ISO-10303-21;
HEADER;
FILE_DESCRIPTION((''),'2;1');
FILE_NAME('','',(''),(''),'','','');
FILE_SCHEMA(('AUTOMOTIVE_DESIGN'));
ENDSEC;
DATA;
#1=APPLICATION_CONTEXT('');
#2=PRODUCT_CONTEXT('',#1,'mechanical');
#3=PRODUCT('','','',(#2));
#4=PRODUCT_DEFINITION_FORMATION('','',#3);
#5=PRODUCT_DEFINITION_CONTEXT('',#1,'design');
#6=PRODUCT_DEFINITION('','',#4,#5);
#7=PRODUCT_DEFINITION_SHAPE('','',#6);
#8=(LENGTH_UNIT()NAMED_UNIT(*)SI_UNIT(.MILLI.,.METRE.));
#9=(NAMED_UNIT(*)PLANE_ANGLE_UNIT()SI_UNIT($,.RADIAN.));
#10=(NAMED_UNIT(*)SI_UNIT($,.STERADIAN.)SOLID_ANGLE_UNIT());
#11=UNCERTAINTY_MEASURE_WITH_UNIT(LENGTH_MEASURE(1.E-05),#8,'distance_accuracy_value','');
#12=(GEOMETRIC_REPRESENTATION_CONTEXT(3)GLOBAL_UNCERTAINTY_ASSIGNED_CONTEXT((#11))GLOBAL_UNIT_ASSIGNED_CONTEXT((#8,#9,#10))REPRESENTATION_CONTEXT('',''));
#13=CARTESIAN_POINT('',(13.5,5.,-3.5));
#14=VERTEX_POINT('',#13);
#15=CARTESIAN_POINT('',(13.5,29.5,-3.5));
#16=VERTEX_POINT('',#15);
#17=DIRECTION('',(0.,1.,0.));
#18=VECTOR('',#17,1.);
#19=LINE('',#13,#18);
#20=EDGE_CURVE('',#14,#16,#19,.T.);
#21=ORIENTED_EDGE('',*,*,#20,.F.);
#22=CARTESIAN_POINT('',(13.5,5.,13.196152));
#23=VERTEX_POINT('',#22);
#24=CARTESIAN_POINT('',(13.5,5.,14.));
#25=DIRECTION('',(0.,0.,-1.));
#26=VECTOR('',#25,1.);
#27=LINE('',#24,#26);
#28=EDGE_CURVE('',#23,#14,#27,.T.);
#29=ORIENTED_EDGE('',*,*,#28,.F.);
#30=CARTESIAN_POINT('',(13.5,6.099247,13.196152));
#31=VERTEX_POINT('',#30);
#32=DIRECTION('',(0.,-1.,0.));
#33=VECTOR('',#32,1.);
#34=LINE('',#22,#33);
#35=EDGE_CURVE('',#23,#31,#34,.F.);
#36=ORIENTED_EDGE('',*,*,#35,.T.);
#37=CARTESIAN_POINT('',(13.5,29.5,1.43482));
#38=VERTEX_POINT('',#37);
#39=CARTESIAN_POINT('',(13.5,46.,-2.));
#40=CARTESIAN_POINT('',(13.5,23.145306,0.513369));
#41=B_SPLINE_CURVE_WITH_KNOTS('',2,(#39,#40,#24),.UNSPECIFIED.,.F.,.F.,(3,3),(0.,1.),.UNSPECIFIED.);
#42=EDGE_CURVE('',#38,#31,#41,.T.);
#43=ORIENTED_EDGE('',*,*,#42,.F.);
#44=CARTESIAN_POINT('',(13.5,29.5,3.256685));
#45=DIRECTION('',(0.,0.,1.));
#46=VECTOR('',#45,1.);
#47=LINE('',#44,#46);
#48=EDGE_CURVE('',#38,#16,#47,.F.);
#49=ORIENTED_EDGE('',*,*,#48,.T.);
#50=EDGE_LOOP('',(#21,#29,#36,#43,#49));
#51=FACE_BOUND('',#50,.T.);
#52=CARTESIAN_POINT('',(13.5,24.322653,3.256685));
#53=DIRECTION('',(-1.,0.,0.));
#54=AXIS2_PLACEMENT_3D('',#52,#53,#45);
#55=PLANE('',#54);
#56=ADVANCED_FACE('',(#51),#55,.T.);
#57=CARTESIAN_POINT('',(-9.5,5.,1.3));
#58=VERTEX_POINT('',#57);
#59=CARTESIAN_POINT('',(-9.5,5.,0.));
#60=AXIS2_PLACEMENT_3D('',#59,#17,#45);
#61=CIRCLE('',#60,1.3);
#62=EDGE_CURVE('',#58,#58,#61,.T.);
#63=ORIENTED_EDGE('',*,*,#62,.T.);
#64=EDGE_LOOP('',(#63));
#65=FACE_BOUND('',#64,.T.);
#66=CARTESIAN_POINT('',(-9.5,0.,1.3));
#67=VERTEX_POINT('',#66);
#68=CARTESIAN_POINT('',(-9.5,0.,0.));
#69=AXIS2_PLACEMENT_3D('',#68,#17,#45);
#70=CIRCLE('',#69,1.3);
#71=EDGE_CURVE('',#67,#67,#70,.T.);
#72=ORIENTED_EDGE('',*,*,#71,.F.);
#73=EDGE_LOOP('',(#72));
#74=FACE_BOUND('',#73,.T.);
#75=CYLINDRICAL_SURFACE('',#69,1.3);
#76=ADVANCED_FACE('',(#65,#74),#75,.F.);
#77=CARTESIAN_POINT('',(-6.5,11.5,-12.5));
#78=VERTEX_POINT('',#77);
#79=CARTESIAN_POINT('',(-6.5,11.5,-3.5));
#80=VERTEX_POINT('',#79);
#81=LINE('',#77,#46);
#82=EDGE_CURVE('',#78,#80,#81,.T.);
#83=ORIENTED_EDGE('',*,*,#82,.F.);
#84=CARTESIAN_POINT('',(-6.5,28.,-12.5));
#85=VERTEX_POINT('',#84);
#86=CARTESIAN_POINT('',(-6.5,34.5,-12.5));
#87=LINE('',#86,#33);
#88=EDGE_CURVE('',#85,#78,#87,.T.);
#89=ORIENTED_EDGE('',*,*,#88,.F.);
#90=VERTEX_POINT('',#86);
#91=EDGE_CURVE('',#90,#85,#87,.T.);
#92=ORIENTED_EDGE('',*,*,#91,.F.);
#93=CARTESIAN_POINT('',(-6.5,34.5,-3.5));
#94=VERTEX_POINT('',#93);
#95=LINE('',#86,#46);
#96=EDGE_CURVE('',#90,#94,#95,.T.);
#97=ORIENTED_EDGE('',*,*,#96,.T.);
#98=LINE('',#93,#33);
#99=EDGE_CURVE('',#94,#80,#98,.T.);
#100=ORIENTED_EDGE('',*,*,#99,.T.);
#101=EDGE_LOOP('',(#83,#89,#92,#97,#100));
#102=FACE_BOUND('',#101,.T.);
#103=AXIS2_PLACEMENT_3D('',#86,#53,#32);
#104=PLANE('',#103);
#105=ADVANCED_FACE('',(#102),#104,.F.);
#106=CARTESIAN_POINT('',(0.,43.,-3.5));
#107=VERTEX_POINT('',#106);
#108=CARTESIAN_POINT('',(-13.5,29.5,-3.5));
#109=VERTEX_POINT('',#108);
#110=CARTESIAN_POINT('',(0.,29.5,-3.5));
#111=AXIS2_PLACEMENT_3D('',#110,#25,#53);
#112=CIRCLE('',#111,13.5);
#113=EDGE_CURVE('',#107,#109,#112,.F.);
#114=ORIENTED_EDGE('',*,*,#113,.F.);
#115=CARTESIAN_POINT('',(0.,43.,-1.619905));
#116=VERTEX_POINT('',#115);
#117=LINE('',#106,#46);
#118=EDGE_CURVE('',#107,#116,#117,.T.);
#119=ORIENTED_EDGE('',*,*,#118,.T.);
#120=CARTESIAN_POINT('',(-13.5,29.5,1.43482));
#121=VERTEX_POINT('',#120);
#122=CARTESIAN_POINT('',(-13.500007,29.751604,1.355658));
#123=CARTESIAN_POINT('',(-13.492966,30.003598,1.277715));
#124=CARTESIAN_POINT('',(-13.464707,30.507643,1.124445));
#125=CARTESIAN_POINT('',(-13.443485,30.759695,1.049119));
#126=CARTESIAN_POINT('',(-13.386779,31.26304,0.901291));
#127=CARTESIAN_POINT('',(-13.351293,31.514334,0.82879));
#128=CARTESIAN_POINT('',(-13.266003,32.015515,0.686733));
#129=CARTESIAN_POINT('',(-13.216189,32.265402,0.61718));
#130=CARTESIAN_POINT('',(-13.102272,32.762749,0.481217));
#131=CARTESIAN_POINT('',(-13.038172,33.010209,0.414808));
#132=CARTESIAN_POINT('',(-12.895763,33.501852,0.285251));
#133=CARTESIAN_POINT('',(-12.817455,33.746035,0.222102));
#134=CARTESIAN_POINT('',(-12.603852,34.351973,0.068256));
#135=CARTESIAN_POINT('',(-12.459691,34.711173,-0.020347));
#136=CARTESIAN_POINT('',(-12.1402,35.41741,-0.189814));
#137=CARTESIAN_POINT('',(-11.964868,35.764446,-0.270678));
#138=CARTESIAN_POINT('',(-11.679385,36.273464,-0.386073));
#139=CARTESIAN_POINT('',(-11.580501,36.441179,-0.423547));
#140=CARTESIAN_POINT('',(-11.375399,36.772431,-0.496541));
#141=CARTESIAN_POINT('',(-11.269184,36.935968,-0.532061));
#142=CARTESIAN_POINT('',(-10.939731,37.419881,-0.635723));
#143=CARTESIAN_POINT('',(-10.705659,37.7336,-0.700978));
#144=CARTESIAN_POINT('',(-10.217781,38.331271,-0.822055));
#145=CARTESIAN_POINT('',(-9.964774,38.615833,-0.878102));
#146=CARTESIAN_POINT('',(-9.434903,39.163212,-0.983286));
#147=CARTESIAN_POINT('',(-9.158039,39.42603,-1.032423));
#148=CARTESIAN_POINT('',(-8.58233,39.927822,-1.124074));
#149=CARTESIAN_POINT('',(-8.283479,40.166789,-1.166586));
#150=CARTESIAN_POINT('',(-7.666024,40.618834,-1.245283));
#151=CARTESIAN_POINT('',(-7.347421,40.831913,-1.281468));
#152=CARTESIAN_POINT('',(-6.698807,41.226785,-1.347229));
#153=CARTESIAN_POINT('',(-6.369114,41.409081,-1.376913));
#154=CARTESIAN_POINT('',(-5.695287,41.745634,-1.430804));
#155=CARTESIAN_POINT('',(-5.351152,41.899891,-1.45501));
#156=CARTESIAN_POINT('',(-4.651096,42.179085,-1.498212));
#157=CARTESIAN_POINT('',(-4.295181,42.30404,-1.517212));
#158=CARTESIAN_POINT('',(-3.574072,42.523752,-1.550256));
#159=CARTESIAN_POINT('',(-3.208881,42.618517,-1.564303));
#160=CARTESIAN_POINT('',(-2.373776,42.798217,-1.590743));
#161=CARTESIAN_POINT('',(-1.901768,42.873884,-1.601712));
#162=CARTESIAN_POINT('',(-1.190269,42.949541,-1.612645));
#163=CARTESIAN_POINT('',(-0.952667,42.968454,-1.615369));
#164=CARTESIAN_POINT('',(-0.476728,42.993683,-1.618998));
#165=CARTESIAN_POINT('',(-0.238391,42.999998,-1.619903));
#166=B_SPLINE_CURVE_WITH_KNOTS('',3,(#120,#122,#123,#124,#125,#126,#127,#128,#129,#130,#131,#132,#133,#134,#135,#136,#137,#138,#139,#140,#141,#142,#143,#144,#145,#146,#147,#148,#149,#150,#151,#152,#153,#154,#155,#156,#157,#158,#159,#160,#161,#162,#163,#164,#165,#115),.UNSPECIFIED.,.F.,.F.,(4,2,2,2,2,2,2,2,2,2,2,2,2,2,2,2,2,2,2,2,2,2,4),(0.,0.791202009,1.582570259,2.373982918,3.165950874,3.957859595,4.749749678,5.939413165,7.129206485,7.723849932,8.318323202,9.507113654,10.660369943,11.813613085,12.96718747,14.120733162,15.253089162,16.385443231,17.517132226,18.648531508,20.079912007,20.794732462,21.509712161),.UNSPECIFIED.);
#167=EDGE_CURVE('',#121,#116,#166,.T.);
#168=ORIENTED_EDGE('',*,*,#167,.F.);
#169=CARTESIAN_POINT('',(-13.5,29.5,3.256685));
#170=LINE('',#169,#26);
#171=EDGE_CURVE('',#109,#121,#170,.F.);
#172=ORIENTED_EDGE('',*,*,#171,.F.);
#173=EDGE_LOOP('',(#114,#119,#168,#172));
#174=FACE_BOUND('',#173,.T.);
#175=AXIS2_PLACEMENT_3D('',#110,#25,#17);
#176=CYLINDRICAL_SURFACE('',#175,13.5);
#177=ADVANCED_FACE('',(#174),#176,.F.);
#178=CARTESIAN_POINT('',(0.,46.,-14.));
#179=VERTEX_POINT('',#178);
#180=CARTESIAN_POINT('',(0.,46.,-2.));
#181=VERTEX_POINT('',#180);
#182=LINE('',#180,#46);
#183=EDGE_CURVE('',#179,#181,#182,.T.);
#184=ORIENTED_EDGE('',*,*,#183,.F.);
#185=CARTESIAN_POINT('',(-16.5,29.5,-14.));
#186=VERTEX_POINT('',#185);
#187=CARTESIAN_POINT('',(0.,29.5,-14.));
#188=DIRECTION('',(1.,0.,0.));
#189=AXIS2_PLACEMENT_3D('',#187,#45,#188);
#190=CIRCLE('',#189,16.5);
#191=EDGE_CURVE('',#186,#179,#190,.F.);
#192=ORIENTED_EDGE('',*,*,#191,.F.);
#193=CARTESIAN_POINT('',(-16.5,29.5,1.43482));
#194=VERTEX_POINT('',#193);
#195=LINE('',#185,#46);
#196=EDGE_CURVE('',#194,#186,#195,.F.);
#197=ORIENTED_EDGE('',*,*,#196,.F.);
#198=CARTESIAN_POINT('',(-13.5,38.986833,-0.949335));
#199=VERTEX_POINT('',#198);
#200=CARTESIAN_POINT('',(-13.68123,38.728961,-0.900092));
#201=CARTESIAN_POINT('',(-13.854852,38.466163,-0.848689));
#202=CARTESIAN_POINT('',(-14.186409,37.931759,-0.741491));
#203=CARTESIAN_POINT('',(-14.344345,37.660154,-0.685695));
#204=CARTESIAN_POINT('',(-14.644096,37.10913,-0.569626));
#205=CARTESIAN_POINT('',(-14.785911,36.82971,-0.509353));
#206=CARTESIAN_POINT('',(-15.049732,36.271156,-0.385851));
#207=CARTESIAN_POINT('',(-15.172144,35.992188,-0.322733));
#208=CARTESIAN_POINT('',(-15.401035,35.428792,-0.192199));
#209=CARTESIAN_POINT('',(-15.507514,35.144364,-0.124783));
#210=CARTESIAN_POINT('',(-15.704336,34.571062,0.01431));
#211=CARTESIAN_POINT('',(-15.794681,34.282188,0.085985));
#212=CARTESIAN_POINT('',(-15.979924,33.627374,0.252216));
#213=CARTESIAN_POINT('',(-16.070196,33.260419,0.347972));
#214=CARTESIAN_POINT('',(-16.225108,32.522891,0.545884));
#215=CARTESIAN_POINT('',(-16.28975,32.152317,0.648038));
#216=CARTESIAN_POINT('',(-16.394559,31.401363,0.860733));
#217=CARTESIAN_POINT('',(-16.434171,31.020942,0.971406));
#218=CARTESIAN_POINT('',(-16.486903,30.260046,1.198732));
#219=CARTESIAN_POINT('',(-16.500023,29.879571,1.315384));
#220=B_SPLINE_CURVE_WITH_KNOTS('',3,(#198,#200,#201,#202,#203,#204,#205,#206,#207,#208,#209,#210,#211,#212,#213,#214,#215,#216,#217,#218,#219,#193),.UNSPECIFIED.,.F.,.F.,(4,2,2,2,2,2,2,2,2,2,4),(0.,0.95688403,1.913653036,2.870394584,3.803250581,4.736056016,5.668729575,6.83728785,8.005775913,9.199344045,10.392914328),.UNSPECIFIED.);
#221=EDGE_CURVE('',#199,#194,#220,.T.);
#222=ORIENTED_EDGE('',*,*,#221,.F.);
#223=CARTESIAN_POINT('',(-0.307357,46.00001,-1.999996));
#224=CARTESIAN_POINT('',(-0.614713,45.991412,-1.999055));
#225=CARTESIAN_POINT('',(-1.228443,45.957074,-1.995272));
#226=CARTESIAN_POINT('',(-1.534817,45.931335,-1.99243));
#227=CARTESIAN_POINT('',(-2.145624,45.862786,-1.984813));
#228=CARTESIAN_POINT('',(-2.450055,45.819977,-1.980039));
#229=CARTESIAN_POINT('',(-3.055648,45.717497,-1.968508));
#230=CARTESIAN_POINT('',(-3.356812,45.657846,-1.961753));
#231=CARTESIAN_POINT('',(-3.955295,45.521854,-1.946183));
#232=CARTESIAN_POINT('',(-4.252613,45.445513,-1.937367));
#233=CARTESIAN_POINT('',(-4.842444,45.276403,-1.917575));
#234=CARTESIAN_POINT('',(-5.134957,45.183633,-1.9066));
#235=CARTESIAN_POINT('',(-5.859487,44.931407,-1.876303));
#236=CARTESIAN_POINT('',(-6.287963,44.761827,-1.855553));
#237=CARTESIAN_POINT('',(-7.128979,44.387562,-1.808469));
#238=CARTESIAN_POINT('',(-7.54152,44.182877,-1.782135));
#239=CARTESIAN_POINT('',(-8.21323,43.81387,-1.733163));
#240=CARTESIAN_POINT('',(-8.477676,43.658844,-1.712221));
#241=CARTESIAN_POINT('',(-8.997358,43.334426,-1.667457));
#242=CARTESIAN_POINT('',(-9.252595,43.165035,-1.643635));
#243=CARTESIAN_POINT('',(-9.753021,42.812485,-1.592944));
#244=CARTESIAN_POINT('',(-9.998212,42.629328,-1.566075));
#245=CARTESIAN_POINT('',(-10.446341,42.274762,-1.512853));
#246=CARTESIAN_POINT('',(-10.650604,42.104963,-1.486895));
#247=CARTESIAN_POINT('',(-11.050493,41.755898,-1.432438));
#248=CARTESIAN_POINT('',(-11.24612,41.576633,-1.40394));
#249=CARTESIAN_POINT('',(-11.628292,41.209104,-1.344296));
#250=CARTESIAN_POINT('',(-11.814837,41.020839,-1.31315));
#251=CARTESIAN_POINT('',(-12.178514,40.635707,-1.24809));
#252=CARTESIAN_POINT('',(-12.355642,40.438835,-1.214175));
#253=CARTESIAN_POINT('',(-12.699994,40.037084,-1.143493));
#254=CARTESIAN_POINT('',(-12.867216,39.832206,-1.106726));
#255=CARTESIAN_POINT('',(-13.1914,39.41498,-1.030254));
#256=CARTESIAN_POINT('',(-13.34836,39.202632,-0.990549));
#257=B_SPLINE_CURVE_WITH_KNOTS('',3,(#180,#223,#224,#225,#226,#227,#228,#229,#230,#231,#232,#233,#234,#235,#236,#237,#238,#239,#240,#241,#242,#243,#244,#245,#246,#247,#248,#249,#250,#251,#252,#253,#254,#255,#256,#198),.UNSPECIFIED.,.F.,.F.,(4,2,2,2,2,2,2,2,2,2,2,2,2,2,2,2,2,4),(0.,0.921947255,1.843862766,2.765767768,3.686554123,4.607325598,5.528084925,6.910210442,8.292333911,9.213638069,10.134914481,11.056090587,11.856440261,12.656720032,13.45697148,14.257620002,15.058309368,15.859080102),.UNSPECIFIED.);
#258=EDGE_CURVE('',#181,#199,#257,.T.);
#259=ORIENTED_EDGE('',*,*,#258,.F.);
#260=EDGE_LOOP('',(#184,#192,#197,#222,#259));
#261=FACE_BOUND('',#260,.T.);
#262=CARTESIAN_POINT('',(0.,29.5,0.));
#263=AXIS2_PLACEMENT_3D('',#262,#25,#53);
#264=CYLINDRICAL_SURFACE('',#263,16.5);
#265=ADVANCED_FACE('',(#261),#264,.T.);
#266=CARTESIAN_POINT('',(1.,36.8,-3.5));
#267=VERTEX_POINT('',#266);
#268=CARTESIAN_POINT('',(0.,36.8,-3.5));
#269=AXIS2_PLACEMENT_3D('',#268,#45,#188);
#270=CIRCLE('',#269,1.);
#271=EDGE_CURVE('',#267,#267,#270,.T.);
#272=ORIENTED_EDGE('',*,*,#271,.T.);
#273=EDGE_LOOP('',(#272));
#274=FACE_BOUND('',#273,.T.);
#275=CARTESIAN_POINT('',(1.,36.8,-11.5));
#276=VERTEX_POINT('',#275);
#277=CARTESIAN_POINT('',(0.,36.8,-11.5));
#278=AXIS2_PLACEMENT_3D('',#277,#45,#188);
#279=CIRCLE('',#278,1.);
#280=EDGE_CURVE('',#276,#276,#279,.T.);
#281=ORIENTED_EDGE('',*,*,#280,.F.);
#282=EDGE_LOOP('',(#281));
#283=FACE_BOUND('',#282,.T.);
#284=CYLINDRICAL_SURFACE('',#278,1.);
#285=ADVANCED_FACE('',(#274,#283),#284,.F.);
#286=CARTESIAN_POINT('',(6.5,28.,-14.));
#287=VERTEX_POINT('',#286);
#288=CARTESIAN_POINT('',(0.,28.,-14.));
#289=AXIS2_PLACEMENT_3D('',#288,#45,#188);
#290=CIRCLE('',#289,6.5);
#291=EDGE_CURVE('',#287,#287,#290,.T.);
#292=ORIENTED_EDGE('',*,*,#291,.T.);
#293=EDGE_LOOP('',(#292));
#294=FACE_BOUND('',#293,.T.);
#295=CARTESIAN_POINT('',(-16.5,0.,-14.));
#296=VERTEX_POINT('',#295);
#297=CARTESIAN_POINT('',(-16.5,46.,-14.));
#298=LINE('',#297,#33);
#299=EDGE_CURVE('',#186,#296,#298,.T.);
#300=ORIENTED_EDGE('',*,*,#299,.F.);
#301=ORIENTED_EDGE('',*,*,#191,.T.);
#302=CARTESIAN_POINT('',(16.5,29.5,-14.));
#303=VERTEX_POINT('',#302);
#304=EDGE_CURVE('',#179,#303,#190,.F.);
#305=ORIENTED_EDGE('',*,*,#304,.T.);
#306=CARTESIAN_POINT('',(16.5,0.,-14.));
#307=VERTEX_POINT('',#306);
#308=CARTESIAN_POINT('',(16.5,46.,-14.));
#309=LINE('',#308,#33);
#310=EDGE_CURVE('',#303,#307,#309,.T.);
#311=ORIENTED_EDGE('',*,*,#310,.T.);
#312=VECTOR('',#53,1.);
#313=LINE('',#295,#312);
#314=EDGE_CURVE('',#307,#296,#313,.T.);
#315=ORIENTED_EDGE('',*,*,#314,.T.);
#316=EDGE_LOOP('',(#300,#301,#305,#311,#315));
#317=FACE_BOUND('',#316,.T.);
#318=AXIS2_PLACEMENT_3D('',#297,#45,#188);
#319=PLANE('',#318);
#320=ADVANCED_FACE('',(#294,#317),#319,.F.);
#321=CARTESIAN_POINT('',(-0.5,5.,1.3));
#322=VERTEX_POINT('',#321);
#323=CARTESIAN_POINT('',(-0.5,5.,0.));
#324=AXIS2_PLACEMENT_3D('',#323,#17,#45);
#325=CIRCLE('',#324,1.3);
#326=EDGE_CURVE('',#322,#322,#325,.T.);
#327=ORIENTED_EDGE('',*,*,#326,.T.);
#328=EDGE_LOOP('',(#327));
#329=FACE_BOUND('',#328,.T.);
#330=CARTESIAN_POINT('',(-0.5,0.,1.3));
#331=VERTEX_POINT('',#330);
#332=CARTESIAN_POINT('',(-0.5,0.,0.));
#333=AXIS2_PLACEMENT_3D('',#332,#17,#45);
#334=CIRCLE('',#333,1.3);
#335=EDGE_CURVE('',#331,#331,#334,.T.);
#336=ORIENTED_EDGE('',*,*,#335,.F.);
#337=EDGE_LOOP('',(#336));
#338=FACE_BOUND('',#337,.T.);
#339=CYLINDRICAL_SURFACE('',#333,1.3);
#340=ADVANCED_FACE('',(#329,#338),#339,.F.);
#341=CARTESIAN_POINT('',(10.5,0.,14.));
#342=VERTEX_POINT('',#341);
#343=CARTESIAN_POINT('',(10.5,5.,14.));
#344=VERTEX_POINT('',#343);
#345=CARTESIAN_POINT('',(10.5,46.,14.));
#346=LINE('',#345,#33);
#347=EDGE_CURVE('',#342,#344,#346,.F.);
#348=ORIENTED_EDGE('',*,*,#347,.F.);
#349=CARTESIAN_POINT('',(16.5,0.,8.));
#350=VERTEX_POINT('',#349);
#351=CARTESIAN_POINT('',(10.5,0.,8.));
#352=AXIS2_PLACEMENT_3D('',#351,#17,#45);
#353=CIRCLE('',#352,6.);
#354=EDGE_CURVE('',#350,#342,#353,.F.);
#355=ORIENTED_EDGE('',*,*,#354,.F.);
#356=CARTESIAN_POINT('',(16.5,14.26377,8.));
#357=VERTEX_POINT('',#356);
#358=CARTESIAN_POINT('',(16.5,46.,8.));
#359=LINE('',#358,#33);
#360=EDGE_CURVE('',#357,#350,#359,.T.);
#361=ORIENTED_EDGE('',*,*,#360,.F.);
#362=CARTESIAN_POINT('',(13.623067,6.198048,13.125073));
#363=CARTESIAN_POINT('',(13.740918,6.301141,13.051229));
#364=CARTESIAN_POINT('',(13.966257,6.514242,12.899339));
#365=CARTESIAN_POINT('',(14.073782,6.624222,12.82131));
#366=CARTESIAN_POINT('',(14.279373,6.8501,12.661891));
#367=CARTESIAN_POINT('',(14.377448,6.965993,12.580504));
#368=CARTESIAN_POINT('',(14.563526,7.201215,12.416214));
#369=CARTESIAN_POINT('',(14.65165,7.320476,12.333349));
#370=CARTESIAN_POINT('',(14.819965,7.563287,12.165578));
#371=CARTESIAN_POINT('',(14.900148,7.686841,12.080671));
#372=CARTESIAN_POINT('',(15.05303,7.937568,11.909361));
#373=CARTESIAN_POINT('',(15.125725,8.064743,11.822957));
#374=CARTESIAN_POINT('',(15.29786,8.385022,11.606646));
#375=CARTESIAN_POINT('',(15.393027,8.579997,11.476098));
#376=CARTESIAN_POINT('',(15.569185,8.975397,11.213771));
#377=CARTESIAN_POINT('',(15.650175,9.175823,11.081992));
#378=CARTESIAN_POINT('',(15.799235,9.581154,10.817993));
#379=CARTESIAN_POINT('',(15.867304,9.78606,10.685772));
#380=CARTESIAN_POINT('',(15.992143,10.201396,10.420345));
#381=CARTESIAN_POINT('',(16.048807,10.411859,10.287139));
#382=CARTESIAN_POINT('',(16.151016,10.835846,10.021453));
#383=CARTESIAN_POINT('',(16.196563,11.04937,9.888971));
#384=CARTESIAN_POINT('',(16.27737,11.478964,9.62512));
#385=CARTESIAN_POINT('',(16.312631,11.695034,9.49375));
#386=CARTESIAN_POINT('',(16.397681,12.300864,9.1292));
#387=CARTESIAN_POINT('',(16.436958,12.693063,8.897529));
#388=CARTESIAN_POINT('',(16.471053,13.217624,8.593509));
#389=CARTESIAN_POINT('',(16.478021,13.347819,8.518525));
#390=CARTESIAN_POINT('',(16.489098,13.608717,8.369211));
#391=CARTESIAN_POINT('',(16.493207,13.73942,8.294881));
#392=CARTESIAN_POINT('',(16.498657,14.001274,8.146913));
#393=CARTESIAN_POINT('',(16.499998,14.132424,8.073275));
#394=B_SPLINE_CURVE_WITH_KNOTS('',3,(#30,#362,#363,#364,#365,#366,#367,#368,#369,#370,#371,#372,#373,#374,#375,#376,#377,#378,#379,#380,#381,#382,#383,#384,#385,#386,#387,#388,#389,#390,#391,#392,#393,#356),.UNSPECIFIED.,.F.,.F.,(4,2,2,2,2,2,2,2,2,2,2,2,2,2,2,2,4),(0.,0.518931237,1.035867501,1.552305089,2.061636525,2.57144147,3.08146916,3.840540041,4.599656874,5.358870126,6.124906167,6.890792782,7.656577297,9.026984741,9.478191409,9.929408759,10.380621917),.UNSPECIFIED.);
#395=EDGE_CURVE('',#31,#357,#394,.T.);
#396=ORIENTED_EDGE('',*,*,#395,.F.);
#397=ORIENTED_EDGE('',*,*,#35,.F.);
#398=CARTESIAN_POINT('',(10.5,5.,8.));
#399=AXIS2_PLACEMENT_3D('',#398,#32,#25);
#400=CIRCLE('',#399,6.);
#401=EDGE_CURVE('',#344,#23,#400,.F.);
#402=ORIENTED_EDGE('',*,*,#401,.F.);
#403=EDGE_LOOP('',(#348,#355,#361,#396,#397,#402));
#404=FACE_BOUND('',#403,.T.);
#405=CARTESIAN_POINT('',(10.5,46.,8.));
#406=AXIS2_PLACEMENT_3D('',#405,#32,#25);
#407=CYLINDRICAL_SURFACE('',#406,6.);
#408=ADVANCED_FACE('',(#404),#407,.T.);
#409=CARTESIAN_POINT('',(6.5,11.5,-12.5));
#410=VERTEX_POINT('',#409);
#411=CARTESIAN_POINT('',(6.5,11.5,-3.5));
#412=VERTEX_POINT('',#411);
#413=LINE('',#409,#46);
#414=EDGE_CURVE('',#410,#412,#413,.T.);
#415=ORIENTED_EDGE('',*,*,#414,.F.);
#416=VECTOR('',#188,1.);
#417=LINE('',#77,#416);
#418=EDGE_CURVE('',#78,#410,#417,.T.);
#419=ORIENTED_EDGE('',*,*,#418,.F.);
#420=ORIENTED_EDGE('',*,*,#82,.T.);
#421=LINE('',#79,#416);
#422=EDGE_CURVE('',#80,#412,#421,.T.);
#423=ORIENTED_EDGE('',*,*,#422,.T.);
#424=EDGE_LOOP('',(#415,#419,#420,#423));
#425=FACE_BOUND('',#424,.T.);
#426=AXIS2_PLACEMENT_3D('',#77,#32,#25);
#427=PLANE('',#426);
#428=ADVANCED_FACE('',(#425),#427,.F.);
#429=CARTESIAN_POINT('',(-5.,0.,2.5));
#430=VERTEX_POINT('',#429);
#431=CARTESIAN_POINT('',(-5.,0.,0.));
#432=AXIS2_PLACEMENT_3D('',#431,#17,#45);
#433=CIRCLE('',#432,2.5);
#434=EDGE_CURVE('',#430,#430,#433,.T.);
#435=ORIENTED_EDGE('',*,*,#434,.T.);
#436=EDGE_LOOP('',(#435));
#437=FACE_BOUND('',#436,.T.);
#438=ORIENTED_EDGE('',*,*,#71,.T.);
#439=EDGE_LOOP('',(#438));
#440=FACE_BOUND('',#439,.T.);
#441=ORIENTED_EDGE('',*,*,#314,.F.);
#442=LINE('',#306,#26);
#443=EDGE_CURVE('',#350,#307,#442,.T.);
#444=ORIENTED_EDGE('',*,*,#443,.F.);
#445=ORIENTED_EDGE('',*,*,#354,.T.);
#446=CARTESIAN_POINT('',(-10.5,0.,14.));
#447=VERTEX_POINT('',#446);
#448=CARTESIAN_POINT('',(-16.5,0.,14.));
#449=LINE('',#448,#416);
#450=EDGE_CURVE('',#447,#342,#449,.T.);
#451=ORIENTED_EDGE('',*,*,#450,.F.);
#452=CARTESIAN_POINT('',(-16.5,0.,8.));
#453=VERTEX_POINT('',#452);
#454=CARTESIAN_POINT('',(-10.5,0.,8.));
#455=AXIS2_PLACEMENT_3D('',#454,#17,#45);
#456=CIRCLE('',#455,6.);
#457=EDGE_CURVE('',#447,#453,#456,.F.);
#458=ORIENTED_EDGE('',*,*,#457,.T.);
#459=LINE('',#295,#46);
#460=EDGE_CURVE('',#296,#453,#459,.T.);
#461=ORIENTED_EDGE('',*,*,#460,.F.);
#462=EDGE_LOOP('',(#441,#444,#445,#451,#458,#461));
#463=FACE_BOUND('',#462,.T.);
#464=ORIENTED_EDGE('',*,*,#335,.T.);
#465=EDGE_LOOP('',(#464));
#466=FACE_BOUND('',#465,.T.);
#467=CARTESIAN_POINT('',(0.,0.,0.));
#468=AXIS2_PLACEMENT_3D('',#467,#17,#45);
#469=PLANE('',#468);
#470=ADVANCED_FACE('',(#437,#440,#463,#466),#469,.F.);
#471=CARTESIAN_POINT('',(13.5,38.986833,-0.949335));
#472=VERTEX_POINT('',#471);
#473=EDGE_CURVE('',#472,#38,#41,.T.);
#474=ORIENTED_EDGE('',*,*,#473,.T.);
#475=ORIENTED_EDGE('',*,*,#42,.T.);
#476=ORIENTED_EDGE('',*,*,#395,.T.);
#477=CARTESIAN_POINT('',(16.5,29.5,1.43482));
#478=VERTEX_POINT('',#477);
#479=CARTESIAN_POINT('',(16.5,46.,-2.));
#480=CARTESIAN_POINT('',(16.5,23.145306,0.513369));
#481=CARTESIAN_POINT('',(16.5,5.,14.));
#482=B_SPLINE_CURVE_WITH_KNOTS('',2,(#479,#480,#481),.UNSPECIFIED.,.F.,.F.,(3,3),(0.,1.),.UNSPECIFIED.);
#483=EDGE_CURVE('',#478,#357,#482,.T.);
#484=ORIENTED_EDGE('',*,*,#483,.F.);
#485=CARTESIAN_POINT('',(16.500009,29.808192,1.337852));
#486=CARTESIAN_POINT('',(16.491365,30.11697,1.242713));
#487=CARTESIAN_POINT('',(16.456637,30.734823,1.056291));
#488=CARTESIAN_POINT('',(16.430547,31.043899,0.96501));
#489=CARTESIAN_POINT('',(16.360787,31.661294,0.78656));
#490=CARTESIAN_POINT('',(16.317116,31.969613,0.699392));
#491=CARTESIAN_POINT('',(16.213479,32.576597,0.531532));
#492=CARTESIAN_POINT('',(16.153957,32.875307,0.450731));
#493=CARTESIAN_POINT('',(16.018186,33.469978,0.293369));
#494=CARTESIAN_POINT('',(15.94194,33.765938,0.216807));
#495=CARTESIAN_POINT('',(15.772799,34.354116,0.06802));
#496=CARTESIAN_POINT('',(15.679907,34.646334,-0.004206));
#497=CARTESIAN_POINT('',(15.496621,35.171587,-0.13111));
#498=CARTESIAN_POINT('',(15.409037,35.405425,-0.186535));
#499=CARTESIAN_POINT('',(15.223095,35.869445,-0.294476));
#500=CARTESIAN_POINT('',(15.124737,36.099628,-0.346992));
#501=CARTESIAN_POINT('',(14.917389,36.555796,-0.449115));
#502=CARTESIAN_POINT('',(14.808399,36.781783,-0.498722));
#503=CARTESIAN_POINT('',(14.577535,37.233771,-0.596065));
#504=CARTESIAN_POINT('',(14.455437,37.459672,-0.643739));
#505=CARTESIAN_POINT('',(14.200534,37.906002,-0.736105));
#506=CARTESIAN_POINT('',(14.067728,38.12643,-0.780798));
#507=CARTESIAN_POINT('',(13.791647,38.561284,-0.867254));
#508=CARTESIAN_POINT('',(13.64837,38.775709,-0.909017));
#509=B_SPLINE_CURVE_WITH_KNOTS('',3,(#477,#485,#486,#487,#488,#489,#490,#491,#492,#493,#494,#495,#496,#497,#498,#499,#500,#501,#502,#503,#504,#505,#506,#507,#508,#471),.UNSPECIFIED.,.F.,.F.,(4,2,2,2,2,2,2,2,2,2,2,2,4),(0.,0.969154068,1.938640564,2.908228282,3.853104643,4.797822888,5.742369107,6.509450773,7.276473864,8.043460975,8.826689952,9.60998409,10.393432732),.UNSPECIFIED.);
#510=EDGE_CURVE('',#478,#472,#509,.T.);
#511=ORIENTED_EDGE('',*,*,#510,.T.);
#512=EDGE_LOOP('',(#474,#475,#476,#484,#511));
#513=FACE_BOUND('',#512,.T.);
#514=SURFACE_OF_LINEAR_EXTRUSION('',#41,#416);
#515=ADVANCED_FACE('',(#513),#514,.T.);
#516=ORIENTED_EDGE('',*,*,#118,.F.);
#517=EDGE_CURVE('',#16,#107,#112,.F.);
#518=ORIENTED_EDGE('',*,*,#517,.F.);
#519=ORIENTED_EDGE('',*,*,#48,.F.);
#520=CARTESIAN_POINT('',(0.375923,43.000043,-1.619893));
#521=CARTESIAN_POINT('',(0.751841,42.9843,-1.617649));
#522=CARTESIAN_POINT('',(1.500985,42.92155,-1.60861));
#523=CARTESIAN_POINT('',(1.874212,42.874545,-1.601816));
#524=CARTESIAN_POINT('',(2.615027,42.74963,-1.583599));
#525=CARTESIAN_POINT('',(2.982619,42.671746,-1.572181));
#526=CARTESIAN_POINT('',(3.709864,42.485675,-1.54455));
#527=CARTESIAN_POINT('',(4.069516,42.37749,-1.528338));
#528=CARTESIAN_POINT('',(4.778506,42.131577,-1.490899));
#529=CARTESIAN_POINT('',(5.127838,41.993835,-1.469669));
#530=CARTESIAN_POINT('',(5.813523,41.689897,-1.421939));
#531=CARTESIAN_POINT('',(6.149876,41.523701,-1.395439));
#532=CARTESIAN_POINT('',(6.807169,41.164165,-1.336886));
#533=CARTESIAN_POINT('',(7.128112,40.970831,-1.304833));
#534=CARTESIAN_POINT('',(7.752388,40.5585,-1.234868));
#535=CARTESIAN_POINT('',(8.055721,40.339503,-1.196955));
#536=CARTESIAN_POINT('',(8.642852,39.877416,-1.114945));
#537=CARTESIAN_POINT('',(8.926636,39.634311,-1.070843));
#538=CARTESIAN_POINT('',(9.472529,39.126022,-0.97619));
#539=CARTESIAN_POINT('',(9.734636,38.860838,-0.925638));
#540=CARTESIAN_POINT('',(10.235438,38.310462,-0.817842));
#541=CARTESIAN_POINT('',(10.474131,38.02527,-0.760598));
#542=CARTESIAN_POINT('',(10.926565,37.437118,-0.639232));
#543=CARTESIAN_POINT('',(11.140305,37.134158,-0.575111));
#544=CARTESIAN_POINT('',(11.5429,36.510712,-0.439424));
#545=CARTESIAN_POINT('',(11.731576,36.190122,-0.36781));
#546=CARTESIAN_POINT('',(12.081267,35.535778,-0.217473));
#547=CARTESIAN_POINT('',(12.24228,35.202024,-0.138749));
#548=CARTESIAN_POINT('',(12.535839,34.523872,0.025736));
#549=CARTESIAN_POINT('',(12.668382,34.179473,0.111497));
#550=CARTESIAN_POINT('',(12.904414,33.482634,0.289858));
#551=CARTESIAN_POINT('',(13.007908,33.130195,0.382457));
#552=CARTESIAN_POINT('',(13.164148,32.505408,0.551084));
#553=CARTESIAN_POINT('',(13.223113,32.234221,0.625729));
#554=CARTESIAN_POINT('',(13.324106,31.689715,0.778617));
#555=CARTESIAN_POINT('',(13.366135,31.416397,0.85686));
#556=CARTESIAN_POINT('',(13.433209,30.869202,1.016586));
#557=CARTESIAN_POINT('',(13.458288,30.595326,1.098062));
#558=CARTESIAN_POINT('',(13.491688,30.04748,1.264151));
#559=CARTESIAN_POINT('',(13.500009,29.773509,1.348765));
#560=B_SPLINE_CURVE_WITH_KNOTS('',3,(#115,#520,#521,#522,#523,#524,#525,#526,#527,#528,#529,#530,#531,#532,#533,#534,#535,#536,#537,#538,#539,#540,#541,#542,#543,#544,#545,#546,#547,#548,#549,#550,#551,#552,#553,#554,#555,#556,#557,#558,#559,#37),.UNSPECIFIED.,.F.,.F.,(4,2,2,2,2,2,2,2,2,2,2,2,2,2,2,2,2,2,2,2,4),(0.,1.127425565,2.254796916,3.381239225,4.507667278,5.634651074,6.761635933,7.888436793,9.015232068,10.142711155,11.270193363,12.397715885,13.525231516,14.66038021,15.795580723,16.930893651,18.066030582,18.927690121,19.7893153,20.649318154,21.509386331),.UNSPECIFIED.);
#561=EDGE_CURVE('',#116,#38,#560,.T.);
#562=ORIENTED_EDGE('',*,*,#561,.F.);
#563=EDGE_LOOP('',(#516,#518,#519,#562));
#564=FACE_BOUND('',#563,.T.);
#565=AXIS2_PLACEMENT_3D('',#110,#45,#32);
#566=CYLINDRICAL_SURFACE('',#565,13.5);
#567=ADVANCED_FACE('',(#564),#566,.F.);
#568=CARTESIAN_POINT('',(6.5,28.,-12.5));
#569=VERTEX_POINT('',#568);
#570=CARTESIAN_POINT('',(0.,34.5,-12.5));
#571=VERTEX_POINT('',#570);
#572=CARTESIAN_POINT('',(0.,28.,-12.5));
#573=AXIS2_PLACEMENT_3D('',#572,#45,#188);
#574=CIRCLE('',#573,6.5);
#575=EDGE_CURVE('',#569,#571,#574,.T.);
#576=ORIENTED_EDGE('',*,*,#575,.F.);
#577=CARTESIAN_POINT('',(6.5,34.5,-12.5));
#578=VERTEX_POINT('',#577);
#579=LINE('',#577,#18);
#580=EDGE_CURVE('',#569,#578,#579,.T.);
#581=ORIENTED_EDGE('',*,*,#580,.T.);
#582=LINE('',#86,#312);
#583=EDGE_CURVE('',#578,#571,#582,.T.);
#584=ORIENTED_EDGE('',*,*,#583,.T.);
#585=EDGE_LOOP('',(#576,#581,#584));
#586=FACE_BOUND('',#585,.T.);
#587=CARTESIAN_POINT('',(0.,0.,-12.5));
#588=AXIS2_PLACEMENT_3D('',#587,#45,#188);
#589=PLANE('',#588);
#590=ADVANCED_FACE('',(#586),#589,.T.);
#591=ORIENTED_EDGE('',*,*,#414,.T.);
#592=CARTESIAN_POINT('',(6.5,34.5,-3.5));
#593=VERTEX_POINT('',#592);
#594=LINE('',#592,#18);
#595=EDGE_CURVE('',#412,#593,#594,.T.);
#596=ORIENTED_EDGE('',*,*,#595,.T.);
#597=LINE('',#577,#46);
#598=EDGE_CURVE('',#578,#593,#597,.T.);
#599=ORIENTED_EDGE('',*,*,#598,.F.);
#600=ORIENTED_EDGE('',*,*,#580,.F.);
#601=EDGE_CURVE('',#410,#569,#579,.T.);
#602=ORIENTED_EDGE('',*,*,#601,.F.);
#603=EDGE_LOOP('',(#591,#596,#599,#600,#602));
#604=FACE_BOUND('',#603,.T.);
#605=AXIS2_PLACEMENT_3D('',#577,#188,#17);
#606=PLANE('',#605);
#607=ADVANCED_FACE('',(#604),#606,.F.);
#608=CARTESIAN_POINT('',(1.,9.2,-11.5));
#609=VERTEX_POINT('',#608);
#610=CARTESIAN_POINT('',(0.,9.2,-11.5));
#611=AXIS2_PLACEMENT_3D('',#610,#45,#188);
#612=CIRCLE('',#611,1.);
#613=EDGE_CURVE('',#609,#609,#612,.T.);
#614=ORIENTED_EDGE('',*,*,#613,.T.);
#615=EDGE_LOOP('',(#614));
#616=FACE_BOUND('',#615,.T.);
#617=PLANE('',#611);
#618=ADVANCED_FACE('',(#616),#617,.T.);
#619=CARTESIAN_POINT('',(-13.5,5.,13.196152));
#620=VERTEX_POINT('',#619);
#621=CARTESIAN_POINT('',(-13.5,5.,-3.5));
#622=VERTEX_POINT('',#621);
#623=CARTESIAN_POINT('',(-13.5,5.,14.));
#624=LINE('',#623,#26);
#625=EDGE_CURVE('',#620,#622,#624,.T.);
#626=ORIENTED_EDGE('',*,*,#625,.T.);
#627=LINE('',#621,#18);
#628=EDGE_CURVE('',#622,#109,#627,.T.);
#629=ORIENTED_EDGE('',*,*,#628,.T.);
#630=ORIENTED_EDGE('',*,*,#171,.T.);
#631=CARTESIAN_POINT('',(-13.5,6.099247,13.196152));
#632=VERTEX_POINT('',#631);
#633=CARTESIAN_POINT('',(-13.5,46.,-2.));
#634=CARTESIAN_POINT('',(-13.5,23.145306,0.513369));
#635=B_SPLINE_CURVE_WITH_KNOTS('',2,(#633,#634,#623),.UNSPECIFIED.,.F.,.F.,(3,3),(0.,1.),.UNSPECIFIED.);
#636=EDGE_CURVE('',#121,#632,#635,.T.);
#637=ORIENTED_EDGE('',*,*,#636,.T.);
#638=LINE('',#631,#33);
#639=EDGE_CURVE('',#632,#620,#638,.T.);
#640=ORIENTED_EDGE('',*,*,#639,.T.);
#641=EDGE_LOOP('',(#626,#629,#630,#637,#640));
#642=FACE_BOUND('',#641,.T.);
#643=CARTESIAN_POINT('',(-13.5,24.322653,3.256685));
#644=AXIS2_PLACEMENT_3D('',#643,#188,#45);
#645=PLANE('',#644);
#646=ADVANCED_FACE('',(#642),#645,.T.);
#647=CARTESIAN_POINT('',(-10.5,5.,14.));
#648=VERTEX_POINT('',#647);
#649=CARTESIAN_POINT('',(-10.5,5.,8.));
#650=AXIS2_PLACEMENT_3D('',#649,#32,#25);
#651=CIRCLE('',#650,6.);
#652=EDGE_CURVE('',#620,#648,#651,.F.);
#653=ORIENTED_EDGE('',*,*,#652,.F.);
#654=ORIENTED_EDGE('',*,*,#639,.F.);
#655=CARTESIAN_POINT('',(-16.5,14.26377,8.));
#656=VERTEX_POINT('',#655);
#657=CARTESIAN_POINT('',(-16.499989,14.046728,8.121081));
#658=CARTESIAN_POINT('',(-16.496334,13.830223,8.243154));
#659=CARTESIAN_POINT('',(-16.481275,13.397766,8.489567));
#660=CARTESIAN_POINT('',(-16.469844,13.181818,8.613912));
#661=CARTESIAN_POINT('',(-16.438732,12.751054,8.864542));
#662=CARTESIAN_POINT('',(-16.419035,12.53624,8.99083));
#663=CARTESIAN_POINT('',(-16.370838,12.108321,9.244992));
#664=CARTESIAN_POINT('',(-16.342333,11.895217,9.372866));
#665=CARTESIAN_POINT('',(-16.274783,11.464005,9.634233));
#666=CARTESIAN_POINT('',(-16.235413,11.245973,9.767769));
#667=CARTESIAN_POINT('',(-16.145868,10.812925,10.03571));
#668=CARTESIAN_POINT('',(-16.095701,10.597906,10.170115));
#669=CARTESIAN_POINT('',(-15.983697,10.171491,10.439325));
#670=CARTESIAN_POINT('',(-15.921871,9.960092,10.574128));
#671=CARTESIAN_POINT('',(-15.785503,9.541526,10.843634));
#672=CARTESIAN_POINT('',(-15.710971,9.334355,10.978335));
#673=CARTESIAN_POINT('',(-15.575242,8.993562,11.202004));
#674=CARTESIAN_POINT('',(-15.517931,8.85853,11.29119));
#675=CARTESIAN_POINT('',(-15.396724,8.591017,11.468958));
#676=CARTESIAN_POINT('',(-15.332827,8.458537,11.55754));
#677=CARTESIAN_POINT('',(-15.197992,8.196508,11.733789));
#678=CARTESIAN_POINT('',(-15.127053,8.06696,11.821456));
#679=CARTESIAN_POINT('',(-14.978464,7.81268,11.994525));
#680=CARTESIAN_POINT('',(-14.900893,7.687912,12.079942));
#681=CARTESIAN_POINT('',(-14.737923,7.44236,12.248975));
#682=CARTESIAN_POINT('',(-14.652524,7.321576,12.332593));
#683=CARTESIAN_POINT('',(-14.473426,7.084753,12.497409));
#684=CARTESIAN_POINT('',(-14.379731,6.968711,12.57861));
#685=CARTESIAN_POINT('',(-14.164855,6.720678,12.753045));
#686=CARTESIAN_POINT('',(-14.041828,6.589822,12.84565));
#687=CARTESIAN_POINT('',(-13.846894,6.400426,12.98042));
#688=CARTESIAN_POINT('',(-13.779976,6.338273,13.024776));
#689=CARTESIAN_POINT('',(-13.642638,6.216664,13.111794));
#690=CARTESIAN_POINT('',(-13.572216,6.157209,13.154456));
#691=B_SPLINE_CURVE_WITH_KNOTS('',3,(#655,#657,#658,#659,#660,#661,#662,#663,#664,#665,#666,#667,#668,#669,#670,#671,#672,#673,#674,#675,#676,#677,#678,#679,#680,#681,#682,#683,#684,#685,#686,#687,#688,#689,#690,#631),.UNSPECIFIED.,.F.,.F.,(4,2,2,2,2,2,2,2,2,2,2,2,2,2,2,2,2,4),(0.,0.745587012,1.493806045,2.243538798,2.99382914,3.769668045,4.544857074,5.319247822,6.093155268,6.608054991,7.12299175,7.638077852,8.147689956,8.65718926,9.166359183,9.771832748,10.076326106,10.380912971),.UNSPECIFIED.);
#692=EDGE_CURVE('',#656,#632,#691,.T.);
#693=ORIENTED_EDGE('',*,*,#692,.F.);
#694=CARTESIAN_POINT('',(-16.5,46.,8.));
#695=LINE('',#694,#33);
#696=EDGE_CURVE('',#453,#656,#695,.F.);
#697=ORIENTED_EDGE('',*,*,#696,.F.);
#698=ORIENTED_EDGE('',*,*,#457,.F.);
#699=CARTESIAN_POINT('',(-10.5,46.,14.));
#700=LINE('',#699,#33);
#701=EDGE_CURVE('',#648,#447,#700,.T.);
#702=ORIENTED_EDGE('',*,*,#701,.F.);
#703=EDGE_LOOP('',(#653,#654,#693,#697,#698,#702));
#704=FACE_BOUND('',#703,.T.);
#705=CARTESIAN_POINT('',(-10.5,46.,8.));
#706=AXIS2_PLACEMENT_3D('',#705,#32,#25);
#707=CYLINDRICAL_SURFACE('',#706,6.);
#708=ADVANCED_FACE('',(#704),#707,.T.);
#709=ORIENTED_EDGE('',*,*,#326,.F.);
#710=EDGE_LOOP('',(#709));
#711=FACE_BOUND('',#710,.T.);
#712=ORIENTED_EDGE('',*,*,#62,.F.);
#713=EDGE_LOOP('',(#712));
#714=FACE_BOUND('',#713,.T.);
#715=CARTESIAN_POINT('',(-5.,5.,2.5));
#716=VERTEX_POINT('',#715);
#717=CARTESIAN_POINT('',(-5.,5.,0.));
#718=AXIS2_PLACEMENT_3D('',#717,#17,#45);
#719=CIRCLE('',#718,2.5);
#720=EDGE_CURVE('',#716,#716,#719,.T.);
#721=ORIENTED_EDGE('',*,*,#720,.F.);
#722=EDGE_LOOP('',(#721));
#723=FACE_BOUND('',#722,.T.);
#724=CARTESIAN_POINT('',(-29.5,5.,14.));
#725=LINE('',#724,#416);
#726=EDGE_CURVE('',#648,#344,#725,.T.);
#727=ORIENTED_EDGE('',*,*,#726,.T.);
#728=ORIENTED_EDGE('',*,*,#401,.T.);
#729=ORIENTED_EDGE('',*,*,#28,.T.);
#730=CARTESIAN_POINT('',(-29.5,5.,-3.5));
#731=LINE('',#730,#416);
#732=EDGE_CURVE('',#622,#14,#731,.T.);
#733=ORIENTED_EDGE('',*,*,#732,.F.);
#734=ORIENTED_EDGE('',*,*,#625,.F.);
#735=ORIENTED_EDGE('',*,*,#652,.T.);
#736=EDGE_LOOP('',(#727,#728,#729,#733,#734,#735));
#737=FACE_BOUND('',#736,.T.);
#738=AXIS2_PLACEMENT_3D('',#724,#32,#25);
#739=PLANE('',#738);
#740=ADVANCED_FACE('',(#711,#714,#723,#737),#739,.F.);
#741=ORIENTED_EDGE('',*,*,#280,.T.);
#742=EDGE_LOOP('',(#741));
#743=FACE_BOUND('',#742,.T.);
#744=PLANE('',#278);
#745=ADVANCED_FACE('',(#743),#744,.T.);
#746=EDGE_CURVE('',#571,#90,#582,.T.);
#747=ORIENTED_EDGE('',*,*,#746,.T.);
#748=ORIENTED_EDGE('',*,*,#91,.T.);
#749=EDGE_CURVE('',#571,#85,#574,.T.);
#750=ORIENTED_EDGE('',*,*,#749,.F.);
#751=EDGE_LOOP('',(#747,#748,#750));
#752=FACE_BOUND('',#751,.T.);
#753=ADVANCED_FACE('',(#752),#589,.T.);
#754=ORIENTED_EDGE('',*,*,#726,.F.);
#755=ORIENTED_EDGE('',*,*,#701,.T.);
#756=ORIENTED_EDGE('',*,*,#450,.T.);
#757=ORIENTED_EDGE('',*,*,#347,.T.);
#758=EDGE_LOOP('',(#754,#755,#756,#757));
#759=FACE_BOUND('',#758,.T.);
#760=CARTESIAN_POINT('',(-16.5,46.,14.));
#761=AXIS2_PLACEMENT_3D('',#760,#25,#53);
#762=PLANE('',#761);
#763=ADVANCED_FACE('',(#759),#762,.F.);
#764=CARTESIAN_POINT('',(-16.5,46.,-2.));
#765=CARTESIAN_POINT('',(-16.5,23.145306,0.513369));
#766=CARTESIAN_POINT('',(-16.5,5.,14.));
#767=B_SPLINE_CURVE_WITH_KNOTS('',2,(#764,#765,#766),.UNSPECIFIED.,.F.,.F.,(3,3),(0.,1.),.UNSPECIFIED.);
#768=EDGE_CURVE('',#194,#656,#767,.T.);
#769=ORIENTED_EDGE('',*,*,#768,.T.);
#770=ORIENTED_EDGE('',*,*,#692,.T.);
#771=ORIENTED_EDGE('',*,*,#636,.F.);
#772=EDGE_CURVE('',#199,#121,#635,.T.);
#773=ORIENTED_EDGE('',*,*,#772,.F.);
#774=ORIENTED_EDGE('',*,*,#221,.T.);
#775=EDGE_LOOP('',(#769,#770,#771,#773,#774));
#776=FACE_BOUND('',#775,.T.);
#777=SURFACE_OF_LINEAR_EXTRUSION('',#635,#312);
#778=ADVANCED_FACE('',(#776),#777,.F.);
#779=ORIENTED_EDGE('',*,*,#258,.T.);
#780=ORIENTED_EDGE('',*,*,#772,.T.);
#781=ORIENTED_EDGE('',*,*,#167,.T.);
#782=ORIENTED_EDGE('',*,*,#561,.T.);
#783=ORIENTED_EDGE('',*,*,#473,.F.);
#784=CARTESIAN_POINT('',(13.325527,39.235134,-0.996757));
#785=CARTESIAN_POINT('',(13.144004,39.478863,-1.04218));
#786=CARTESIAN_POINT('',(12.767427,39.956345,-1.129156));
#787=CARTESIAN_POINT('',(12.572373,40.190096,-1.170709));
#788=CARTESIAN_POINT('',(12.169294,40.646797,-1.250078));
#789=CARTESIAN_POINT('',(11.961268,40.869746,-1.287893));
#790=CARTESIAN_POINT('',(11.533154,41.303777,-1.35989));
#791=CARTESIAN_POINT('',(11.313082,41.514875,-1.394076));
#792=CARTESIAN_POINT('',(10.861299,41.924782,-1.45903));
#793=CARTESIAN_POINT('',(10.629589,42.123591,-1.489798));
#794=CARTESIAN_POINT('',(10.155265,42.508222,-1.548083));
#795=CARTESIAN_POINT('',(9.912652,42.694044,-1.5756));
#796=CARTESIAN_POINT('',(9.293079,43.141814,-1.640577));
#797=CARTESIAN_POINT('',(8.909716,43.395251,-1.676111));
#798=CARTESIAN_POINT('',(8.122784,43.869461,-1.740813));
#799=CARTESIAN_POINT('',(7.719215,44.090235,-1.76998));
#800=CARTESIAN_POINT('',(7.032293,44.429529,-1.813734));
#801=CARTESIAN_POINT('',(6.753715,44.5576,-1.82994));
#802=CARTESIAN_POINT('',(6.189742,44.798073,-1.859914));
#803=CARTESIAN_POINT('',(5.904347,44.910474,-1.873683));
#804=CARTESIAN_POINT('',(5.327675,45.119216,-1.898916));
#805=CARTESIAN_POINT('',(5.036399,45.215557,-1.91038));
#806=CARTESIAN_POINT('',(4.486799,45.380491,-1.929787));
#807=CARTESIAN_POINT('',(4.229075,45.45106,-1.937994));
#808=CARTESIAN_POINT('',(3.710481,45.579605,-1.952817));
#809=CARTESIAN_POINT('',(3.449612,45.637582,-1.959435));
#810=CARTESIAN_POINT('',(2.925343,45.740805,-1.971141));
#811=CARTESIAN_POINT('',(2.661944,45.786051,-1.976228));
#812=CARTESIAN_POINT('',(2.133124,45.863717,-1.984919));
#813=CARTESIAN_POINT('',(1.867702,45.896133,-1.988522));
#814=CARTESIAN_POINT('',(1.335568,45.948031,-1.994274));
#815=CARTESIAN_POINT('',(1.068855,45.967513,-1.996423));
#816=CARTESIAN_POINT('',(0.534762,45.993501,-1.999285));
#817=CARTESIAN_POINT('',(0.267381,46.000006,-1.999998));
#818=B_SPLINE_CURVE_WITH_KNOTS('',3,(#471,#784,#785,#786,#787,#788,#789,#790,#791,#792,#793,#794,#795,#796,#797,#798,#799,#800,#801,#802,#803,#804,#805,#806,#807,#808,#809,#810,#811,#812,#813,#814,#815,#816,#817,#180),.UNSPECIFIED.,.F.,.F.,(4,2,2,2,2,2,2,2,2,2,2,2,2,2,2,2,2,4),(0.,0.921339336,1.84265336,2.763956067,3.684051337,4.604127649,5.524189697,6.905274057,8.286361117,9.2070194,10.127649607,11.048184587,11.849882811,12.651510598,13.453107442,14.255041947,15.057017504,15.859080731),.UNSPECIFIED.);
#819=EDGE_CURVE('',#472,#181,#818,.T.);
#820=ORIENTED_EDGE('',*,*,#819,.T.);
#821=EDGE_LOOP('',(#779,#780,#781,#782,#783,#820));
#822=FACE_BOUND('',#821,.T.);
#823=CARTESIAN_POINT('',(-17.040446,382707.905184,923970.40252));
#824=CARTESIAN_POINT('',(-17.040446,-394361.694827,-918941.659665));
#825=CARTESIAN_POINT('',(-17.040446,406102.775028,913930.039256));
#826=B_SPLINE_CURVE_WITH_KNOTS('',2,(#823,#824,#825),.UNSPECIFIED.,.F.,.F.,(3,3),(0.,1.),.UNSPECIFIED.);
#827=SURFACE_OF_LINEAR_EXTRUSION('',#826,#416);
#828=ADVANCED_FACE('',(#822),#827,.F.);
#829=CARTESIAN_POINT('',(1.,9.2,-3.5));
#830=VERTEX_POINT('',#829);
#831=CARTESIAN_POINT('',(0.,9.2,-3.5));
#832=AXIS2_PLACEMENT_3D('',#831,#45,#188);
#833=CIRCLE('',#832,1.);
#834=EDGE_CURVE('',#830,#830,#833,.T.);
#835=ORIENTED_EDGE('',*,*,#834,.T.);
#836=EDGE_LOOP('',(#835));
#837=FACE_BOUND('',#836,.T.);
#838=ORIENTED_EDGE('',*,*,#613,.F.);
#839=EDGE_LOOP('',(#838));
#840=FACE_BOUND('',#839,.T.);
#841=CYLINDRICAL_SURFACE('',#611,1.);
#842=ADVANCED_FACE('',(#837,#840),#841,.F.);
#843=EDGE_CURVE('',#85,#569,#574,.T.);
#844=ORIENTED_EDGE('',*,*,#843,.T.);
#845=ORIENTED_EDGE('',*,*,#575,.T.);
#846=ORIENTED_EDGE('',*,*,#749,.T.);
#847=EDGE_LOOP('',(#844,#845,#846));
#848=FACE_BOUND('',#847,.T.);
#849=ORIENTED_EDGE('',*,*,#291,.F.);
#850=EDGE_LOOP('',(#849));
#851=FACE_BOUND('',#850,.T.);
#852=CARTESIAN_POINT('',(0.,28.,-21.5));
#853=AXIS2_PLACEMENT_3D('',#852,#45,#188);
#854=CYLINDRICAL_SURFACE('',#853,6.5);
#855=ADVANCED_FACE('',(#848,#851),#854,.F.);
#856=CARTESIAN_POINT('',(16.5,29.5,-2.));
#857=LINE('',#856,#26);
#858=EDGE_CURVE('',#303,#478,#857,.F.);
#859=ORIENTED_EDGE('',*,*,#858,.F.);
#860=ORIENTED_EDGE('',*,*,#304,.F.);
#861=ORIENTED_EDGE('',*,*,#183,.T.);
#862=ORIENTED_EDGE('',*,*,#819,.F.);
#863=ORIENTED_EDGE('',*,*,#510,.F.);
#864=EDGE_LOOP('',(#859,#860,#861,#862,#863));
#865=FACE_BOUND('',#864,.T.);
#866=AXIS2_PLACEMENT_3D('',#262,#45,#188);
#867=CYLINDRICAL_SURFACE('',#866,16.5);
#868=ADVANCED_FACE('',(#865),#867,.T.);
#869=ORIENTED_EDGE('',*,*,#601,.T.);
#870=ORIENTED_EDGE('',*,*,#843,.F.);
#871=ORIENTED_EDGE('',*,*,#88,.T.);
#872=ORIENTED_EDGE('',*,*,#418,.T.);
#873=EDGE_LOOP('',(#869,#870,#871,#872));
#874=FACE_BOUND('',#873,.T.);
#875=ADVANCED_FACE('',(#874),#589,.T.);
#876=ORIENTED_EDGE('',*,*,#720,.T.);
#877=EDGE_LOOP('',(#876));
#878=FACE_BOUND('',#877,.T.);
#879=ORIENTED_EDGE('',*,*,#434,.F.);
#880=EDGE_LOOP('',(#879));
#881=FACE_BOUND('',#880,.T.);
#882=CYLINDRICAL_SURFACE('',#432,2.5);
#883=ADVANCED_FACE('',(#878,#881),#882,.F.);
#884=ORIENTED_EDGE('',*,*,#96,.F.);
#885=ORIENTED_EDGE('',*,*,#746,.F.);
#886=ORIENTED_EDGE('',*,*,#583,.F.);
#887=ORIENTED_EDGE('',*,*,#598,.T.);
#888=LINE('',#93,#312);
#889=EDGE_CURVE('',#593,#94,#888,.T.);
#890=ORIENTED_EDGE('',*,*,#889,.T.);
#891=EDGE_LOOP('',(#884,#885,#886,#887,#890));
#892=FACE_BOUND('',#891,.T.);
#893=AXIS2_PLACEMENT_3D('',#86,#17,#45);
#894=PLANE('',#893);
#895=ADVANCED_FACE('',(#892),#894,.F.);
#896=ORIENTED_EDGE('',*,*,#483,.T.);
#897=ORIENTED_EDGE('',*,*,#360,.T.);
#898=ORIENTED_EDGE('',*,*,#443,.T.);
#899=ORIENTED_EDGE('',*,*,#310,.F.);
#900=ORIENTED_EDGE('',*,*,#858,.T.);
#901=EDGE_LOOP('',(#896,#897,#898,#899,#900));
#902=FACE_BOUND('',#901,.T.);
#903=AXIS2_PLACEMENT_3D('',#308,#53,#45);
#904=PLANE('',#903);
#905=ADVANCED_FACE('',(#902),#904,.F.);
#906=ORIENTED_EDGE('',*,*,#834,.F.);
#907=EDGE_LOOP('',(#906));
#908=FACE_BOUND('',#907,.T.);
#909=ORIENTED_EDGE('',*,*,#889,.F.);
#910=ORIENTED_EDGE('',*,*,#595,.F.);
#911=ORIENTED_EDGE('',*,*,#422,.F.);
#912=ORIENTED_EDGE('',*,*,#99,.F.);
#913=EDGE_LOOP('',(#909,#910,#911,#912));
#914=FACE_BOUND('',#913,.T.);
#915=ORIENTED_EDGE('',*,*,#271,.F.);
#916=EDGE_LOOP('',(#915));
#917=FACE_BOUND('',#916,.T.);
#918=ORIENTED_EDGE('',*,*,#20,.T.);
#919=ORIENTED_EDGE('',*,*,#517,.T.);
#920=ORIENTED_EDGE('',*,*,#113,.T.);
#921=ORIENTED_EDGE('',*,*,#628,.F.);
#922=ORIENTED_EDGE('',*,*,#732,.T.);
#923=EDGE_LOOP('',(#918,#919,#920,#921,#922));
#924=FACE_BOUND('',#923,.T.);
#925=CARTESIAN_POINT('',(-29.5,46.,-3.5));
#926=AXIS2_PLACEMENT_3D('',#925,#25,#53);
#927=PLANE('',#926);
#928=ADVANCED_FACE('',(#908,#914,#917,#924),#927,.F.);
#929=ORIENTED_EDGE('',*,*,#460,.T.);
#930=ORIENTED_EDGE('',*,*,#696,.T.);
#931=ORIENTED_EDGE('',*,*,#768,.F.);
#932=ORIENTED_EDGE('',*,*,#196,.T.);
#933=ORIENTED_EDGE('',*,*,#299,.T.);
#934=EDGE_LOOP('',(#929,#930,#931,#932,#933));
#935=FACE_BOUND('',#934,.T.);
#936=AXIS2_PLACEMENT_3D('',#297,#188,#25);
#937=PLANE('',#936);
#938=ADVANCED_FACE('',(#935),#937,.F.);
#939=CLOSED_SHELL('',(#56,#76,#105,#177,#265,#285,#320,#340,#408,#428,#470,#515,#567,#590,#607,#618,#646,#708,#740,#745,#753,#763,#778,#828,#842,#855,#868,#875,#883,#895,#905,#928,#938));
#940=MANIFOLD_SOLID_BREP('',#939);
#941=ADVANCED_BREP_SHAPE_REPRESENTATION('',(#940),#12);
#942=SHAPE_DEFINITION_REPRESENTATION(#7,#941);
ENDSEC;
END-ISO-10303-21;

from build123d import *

# Parameters (mm, degrees)
SKETCH2_W           = 33
SKETCH2_H           = 28
BOSS_EXTRUDE1_DEPTH = 46
SKETCH3_W           = 17.5
SKETCH3_H           = 41
CUT_EXTRUDE1_DEPTH  = 46
BOSS_EXTRUDE2_DEPTH = 3
BOSS_EXTRUDE3_REACH = 58.675
FILLET1_START       = -3.5
FILLET1_DEPTH       = 4.934820146
FILLET1_START_2     = -13.5
FILLET1_2_DEPTH     = 27
FILLET2_R           = 16.5
FILLET3_R           = 6
SKETCH6_W           = 13
SKETCH6_H           = 23
CUT_EXTRUDE2_DEPTH  = 9
SKETCH7_R           = 6.5
CUT_EXTRUDE3_DEPTH  = 9
SKETCH8_R           = 1
CUT_EXTRUDE4_DEPTH  = 8
SKETCH9_R           = 1.3
SKETCH9_R_2         = 2.5
CUT_EXTRUDE5_DEPTH  = 47.360004726


with BuildPart() as part:
    # Sketch2 → Boss-Extrude1 (new body)
    with BuildSketch(Plane(origin=(0, 0, 0), x_dir=(1, 0, 0), z_dir=(0, 1, 0))):
        Rectangle(SKETCH2_W, SKETCH2_H)
    extrude(amount=BOSS_EXTRUDE1_DEPTH)

    # Sketch3 → Cut-Extrude1 (cut)
    with BuildSketch(Plane(origin=(16.5, 0, 0), x_dir=(0, 0, -1), z_dir=(1, 0, 0))):
        with Locations((-5.25, 25.5)):
            Rectangle(SKETCH3_W, SKETCH3_H)
    extrude(amount=-CUT_EXTRUDE1_DEPTH, mode=Mode.SUBTRACT)

    # Sketch4 → Boss-Extrude2 (add)
    with BuildSketch(Plane(origin=(16.5, 0, 0), x_dir=(0, 0, -1), z_dir=(1, 0, 0))):
        with BuildLine():
            Line((3.5, 46), (2, 46))
            add(Edge.make_bspline(
                [(-14, 5), (-0.513369381, 23.145305793), (2, 46)],
                knots=[0, 0, 0, 1, 1, 1], degree=2))
            Line((-14, 5), (3.5, 5))
            Line((3.5, 5), (3.5, 46))
        make_face()
    boss_extrude2 = extrude(amount=-BOSS_EXTRUDE2_DEPTH)

    # Mirror1: Boss-Extrude2 across plane
    add(boss_extrude2.mirror(Plane(origin=(0, 0, 0), x_dir=(0, 0, 1), z_dir=(1, 0, 0))))

    # Boss-Extrude3: up to this face of the body (flat: up to its plane)
    boss_extrude3_end = Plane(part.part.faces().sort_by_distance((-13.5, 18.213858907, 1.639358486))[0])
    # Sketch5 → Boss-Extrude3 (add, up to the picked face)
    with BuildSketch(Plane.ZY.offset(-13.5), mode=Mode.PRIVATE) as boss_extrude3_sk1:
        with BuildLine():
            Line((-3.5, 43), (-1.619905063, 43))
            add(Edge.make_bspline(
                [(-1.619905063, 43), (-1.833911679, 44.489717492), (-2.000000005, 46.00000005)],
                knots=[0, 0, 0, 1, 1, 1], degree=2))
            Line((-2.000000005, 46.00000005), (-3.5, 46))
            Line((-3.5, 46), (-3.5, 43))
        make_face()
    boss_extrude3_tool1 = split(extrude(boss_extrude3_sk1.sketch, amount=BOSS_EXTRUDE3_REACH, mode=Mode.PRIVATE), bisect_by=boss_extrude3_end, keep=Keep.BOTH, mode=Mode.PRIVATE)
    add(boss_extrude3_tool1.solids().sort_by(Axis((13.5, 44.443503, -2.655604), (-1, 0, 0)))[0])

    # Fillet1: read off the stored shape, not the designer's step
    # Fillet1 outline → Fillet1 (add)
    with BuildSketch(Plane.XY.offset(FILLET1_START)):
        with BuildLine():
            ThreePointArc((-13.5, 29.5), (-9.545941546, 39.045941546), (0, 43))
            Line((0, 43), (-13.5, 43))
            Line((-13.5, 43), (-13.5, 29.5))
        make_face()
        with BuildLine():
            ThreePointArc((0, 43), (9.545941546, 39.045941546), (13.5, 29.5))
            Line((13.5, 29.5), (13.5, 43))
            Line((13.5, 43), (0, 43))
        make_face()
    extrude(amount=FILLET1_DEPTH)

    # Fillet1 2 outline → Fillet1 2 (cut)
    with BuildSketch(Plane.YZ.offset(FILLET1_START_2)):
        with BuildLine():
            Line((43, 1.434820146), (29.5, 1.434820046))
            add(Edge.make_bspline(
                [(29.5, 1.434820046), (36.024557501, -0.617842021), (43, -1.619905063)],
                knots=[0.500321207, 0.500321207, 0.500321207, 0.500855825, 0.500855825, 0.500855825], degree=2))
            Line((43, -1.619905063), (43, 1.434820146))
        make_face()
    extrude(amount=FILLET1_2_DEPTH, mode=Mode.SUBTRACT)

    # Fillet2
    # the kernel refuses this fillet: 16.5 mm, written as the material it takes off along each edge
    with BuildSketch(Plane(origin=(16.5, 46, -55.25), x_dir=(0, -1, 0), z_dir=(0, 0, 1)), Plane(origin=(-16.5, 46, 39.25), x_dir=(0, -1, 0), z_dir=(0, 0, -1))) as fillet2_piece_1:
        with BuildLine():
            CenterArc((FILLET2_R, -FILLET2_R), FILLET2_R, 90, 90)
            Line((0, -FILLET2_R), (0, 0))
            Line((0, 0), (FILLET2_R, 0))
        make_face()
    extrude(amount=94.5, mode=Mode.SUBTRACT)

    # Fillet3
    # the kernel refuses this fillet: 6 mm, written as the material it takes off along each edge
    with BuildSketch(Plane(origin=(-16.5, -15, 14), x_dir=(1, 0, 0), z_dir=(0, 1, 0)), Plane(origin=(16.5, -15, 14), x_dir=(0, 0, -1), z_dir=(0, 1, 0))) as fillet3_piece_1:
        with BuildLine():
            CenterArc((FILLET3_R, FILLET3_R), FILLET3_R, 180, 90)
            Line((0, FILLET3_R), (0, 0))
            Line((0, 0), (FILLET3_R, 0))
        make_face()
    extrude(amount=35, mode=Mode.SUBTRACT)

    # Sketch6 → Cut-Extrude2 (cut)
    with BuildSketch(Plane.XY.offset(-3.5)):
        with Locations((0, 23)):
            Rectangle(SKETCH6_W, SKETCH6_H)
    extrude(amount=-CUT_EXTRUDE2_DEPTH, mode=Mode.SUBTRACT)

    # Sketch7 → Cut-Extrude3 (cut)
    with BuildSketch(Plane.XY.offset(-12.5)):
        with Locations((0, 28)):
            Circle(SKETCH7_R)
    extrude(amount=-CUT_EXTRUDE3_DEPTH, mode=Mode.SUBTRACT)

    # Sketch8 → Cut-Extrude4 (cut)
    with BuildSketch(Plane.XY.offset(-3.5)):
        with Locations((0, 36.8)):
            Circle(SKETCH8_R)
        with Locations((0, 9.2)):
            Circle(SKETCH8_R)
    extrude(amount=-CUT_EXTRUDE4_DEPTH, mode=Mode.SUBTRACT)

    # Sketch9 → Cut-Extrude5 (cut, through all)
    with BuildSketch(Plane(origin=(0, 5, 0), x_dir=(1, 0, 0), z_dir=(0, 1, 0))):
        with Locations(Location((-0.5, 0, 0), (0, 0, 270))):
            Circle(SKETCH9_R)
        with Locations(Location((-5, 0, 0), (0, 0, 270))):
            Circle(SKETCH9_R_2)
        with Locations(Location((-9.5, 0, 0), (0, 0, 270))):
            Circle(SKETCH9_R)
    extrude(amount=-CUT_EXTRUDE5_DEPTH, mode=Mode.SUBTRACT)


solid = part.part
